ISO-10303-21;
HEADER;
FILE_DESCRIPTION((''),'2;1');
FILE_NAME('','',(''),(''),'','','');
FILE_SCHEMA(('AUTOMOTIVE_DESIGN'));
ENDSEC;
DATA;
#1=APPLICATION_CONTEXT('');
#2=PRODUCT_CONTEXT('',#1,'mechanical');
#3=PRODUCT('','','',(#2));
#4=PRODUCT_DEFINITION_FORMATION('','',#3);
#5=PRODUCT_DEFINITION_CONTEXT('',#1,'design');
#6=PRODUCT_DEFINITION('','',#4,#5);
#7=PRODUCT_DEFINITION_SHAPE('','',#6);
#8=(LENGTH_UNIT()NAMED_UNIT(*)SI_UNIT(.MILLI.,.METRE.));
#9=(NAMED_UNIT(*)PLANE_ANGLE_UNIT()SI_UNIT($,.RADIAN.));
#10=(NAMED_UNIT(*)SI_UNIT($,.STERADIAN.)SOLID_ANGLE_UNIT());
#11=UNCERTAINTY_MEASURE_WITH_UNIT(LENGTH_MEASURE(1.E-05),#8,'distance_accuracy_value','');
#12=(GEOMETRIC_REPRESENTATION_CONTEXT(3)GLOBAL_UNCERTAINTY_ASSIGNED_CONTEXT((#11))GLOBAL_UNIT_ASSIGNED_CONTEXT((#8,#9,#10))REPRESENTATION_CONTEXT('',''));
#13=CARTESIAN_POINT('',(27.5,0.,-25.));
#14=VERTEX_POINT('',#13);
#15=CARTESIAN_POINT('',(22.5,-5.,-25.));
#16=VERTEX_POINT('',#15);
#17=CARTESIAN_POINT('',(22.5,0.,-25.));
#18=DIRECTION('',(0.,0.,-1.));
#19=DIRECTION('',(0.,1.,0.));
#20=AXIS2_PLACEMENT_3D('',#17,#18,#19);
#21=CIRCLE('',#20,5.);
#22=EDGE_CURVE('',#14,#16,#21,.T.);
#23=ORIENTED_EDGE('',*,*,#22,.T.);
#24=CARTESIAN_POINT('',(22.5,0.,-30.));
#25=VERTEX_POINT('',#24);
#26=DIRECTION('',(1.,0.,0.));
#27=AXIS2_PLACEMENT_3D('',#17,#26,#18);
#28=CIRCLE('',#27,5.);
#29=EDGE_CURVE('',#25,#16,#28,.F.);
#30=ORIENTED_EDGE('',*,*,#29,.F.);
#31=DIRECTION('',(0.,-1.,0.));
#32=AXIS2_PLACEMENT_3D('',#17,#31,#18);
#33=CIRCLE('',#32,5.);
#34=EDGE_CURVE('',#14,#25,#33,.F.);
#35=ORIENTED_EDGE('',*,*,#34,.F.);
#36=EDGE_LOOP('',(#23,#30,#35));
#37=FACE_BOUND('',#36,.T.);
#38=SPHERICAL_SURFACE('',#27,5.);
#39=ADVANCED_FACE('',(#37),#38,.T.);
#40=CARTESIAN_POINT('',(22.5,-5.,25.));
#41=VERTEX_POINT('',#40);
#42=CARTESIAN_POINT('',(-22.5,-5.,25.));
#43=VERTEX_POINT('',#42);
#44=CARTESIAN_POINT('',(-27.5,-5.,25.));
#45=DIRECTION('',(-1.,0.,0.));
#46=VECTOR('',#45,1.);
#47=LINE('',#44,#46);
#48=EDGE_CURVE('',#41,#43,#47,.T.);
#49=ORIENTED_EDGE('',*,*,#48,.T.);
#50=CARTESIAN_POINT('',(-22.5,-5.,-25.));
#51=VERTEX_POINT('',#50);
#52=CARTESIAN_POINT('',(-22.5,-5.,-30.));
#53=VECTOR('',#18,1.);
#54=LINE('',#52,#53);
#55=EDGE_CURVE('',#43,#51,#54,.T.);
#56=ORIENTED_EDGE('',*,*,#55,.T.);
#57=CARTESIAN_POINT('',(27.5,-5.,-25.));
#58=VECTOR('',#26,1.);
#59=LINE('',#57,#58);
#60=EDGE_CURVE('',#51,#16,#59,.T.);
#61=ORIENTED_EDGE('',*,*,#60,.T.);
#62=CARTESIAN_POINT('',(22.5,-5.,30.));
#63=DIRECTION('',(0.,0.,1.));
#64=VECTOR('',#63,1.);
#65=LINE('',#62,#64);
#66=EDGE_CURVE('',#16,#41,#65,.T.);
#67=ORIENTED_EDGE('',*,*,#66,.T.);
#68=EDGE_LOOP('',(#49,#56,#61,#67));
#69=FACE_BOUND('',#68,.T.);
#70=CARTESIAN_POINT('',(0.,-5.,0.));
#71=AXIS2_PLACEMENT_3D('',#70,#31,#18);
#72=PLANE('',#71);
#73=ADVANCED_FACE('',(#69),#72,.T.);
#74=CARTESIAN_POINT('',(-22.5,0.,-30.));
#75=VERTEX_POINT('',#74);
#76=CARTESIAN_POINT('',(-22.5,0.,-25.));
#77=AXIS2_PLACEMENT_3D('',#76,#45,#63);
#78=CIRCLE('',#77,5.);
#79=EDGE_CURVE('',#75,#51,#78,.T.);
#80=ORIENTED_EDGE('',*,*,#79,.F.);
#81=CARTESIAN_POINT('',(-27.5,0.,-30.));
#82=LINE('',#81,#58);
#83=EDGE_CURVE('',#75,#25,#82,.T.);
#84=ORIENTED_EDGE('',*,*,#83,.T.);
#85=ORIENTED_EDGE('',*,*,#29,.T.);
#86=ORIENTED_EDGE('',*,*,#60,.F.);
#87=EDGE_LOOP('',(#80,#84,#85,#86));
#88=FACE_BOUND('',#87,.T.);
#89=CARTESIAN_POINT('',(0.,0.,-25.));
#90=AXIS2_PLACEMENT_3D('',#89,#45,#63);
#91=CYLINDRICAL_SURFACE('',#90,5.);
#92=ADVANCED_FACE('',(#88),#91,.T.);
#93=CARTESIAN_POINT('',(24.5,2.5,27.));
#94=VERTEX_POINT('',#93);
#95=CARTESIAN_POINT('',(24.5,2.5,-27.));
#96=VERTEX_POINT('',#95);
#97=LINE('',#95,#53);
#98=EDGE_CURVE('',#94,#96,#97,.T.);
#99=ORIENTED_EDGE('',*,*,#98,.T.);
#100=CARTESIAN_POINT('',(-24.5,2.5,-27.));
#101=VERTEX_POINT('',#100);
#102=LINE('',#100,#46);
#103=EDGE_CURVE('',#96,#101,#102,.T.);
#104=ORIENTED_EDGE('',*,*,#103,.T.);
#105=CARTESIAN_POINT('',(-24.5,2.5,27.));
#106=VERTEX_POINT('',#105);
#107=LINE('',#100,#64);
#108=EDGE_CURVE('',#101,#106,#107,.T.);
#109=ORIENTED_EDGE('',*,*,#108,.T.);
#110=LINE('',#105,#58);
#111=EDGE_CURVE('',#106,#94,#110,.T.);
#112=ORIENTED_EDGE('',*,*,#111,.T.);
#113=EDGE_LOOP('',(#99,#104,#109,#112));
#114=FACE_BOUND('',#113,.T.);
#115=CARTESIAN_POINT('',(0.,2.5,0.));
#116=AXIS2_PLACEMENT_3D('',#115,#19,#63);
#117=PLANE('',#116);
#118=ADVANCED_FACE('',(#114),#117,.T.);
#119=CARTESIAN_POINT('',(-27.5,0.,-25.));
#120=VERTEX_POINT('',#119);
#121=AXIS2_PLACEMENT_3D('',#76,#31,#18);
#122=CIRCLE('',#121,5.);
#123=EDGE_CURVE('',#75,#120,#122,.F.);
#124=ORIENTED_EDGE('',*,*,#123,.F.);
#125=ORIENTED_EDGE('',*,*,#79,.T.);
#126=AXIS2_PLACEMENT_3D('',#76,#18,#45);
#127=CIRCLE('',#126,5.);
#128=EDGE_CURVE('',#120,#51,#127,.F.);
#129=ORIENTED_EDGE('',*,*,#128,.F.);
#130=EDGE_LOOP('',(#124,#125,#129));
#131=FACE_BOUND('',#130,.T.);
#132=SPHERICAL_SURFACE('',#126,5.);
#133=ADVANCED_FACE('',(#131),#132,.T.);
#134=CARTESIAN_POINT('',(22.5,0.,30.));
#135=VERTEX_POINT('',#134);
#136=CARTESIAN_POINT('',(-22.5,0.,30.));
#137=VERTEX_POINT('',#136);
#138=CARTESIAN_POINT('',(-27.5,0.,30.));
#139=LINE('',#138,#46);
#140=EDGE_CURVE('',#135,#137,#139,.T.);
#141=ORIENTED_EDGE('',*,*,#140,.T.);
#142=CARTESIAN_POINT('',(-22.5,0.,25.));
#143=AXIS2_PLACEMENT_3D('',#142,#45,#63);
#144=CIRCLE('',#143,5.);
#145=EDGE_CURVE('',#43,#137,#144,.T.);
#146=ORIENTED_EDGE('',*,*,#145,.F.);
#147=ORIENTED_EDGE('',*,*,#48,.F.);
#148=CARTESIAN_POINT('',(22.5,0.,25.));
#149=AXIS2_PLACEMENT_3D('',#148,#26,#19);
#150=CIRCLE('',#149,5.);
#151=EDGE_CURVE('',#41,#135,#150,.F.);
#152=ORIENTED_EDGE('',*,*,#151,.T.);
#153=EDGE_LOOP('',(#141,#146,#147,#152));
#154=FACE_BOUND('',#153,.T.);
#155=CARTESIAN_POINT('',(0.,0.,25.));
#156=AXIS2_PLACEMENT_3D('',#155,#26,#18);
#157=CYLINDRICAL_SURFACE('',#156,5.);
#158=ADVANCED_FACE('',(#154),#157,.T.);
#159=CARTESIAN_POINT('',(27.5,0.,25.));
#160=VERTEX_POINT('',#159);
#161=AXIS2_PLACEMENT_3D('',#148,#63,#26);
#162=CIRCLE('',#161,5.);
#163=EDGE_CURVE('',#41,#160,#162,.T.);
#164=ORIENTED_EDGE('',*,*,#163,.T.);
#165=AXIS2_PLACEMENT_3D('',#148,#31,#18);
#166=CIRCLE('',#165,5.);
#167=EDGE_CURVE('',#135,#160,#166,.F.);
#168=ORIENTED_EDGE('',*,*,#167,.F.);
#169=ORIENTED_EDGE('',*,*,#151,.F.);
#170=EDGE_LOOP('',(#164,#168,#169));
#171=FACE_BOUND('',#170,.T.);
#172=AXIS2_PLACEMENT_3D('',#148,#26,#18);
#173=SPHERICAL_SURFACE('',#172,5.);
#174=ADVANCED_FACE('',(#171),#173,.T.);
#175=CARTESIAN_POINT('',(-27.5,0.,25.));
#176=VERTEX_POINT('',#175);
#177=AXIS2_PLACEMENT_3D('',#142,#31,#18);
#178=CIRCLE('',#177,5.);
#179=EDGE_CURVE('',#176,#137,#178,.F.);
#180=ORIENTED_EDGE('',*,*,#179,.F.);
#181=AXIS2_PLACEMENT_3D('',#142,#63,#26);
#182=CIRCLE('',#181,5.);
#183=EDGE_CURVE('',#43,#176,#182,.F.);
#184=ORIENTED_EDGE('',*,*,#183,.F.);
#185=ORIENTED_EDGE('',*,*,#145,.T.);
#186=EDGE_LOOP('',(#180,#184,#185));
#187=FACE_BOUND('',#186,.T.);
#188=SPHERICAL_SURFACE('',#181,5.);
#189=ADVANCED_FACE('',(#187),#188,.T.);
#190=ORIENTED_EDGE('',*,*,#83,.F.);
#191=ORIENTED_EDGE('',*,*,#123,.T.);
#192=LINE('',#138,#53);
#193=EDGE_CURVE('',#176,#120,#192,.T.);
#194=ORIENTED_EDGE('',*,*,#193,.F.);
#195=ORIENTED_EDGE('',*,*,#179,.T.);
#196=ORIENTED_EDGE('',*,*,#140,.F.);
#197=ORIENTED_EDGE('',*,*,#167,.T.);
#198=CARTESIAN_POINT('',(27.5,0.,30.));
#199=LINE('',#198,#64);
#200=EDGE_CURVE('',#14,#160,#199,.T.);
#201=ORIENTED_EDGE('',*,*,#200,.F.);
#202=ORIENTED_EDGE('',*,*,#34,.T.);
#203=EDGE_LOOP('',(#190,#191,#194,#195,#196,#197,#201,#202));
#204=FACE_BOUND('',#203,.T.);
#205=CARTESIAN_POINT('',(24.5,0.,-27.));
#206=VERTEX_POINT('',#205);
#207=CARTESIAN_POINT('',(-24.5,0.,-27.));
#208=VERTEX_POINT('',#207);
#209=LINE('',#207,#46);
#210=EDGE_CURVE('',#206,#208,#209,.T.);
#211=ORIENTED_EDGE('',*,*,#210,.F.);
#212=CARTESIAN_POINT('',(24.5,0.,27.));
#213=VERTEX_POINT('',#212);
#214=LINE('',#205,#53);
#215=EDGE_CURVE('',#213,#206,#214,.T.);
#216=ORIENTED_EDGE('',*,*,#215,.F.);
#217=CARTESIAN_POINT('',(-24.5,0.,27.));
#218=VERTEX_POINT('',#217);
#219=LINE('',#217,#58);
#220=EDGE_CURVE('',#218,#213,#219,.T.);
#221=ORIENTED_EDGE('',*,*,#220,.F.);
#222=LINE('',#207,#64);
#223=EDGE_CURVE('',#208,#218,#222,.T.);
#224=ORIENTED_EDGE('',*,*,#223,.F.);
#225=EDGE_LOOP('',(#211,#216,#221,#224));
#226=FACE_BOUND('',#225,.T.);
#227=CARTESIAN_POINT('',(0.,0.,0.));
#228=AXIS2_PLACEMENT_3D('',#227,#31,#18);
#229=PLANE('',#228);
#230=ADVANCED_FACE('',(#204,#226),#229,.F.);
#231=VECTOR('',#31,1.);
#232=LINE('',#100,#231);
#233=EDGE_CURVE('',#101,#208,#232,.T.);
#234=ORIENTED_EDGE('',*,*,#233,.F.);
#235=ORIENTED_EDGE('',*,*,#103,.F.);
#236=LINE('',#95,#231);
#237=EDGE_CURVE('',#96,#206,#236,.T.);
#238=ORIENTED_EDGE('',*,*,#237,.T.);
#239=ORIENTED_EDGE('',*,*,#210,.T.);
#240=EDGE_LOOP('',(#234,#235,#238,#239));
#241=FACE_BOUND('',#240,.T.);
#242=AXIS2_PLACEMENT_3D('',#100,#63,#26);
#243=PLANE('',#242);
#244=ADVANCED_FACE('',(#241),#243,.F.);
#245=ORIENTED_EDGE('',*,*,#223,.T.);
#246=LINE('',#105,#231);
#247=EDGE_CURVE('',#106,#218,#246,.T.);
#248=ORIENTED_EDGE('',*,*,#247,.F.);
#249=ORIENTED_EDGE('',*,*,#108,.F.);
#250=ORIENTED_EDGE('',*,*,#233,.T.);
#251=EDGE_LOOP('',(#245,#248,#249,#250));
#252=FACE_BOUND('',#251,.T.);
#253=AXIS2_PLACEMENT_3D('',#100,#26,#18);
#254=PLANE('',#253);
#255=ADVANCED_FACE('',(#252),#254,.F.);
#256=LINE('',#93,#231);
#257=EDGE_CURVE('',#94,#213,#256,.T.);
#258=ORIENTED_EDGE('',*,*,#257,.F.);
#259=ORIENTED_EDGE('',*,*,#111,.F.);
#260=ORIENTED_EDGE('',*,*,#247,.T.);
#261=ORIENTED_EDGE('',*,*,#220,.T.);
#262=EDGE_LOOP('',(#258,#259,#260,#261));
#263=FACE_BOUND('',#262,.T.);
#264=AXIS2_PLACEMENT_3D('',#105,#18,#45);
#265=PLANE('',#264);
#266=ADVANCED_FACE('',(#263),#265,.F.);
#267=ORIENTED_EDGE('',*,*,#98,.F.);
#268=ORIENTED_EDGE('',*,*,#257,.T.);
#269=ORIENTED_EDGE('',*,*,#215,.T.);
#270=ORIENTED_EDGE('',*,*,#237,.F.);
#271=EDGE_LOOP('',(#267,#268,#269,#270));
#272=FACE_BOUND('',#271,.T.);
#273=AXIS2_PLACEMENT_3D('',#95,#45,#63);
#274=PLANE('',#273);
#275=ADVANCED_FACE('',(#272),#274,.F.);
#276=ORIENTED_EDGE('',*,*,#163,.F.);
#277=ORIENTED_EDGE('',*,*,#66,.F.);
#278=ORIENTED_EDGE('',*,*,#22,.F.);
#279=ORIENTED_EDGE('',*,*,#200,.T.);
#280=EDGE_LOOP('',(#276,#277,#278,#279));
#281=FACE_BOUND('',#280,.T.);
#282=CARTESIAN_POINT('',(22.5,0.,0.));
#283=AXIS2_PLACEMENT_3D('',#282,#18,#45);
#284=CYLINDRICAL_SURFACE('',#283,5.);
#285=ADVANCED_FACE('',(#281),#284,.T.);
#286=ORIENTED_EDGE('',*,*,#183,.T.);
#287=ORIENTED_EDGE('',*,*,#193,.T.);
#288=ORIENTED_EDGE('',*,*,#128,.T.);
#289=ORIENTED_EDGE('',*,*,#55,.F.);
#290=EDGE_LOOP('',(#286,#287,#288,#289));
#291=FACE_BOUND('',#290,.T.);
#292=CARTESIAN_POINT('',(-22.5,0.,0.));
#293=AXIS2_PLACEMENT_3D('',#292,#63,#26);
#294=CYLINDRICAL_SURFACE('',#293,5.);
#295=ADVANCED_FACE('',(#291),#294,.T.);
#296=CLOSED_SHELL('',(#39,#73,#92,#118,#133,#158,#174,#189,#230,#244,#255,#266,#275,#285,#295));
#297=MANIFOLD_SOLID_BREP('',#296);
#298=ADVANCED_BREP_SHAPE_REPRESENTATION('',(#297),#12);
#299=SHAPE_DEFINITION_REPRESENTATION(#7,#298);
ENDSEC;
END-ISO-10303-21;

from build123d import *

# Parameters (mm, degrees)
SKETCH1_W           = 49
SKETCH1_H           = 54
BOSS_EXTRUDE1_DEPTH = 2.5
SKETCH2_W           = 55
SKETCH2_H           = 60
BOSS_EXTRUDE2_DEPTH = 5
FILLET1_R           = 5


with BuildPart() as part:
    # Sketch1 → Boss-Extrude1 (new body)
    with BuildSketch(Plane(origin=(0, 0, 0), x_dir=(1, 0, 0), z_dir=(0, 1, 0))):
        Rectangle(SKETCH1_W, SKETCH1_H)
    extrude(amount=BOSS_EXTRUDE1_DEPTH)

    # Sketch2 → Boss-Extrude2 (add)
    with BuildSketch(Plane.XZ):
        Rectangle(SKETCH2_W, SKETCH2_H)
    extrude(amount=BOSS_EXTRUDE2_DEPTH)

    # Fillet1
    fillet1_edges = [part.edges().sort_by_distance(p)[0] for p in [
        (-27.5, -2.5, 30),
        (-27.5, -2.5, -30),
        (27.5, -2.5, -30),
        (27.5, -2.5, 30),
        (-27.5, -5, 0),
        (0, -5, -30),
        (27.5, -5, 0),
        (0, -5, 30),
    ]]
    fillet(fillet1_edges, radius=FILLET1_R - 0.0001)  # a hair under: the kernel refuses the full size


solid = part.part
